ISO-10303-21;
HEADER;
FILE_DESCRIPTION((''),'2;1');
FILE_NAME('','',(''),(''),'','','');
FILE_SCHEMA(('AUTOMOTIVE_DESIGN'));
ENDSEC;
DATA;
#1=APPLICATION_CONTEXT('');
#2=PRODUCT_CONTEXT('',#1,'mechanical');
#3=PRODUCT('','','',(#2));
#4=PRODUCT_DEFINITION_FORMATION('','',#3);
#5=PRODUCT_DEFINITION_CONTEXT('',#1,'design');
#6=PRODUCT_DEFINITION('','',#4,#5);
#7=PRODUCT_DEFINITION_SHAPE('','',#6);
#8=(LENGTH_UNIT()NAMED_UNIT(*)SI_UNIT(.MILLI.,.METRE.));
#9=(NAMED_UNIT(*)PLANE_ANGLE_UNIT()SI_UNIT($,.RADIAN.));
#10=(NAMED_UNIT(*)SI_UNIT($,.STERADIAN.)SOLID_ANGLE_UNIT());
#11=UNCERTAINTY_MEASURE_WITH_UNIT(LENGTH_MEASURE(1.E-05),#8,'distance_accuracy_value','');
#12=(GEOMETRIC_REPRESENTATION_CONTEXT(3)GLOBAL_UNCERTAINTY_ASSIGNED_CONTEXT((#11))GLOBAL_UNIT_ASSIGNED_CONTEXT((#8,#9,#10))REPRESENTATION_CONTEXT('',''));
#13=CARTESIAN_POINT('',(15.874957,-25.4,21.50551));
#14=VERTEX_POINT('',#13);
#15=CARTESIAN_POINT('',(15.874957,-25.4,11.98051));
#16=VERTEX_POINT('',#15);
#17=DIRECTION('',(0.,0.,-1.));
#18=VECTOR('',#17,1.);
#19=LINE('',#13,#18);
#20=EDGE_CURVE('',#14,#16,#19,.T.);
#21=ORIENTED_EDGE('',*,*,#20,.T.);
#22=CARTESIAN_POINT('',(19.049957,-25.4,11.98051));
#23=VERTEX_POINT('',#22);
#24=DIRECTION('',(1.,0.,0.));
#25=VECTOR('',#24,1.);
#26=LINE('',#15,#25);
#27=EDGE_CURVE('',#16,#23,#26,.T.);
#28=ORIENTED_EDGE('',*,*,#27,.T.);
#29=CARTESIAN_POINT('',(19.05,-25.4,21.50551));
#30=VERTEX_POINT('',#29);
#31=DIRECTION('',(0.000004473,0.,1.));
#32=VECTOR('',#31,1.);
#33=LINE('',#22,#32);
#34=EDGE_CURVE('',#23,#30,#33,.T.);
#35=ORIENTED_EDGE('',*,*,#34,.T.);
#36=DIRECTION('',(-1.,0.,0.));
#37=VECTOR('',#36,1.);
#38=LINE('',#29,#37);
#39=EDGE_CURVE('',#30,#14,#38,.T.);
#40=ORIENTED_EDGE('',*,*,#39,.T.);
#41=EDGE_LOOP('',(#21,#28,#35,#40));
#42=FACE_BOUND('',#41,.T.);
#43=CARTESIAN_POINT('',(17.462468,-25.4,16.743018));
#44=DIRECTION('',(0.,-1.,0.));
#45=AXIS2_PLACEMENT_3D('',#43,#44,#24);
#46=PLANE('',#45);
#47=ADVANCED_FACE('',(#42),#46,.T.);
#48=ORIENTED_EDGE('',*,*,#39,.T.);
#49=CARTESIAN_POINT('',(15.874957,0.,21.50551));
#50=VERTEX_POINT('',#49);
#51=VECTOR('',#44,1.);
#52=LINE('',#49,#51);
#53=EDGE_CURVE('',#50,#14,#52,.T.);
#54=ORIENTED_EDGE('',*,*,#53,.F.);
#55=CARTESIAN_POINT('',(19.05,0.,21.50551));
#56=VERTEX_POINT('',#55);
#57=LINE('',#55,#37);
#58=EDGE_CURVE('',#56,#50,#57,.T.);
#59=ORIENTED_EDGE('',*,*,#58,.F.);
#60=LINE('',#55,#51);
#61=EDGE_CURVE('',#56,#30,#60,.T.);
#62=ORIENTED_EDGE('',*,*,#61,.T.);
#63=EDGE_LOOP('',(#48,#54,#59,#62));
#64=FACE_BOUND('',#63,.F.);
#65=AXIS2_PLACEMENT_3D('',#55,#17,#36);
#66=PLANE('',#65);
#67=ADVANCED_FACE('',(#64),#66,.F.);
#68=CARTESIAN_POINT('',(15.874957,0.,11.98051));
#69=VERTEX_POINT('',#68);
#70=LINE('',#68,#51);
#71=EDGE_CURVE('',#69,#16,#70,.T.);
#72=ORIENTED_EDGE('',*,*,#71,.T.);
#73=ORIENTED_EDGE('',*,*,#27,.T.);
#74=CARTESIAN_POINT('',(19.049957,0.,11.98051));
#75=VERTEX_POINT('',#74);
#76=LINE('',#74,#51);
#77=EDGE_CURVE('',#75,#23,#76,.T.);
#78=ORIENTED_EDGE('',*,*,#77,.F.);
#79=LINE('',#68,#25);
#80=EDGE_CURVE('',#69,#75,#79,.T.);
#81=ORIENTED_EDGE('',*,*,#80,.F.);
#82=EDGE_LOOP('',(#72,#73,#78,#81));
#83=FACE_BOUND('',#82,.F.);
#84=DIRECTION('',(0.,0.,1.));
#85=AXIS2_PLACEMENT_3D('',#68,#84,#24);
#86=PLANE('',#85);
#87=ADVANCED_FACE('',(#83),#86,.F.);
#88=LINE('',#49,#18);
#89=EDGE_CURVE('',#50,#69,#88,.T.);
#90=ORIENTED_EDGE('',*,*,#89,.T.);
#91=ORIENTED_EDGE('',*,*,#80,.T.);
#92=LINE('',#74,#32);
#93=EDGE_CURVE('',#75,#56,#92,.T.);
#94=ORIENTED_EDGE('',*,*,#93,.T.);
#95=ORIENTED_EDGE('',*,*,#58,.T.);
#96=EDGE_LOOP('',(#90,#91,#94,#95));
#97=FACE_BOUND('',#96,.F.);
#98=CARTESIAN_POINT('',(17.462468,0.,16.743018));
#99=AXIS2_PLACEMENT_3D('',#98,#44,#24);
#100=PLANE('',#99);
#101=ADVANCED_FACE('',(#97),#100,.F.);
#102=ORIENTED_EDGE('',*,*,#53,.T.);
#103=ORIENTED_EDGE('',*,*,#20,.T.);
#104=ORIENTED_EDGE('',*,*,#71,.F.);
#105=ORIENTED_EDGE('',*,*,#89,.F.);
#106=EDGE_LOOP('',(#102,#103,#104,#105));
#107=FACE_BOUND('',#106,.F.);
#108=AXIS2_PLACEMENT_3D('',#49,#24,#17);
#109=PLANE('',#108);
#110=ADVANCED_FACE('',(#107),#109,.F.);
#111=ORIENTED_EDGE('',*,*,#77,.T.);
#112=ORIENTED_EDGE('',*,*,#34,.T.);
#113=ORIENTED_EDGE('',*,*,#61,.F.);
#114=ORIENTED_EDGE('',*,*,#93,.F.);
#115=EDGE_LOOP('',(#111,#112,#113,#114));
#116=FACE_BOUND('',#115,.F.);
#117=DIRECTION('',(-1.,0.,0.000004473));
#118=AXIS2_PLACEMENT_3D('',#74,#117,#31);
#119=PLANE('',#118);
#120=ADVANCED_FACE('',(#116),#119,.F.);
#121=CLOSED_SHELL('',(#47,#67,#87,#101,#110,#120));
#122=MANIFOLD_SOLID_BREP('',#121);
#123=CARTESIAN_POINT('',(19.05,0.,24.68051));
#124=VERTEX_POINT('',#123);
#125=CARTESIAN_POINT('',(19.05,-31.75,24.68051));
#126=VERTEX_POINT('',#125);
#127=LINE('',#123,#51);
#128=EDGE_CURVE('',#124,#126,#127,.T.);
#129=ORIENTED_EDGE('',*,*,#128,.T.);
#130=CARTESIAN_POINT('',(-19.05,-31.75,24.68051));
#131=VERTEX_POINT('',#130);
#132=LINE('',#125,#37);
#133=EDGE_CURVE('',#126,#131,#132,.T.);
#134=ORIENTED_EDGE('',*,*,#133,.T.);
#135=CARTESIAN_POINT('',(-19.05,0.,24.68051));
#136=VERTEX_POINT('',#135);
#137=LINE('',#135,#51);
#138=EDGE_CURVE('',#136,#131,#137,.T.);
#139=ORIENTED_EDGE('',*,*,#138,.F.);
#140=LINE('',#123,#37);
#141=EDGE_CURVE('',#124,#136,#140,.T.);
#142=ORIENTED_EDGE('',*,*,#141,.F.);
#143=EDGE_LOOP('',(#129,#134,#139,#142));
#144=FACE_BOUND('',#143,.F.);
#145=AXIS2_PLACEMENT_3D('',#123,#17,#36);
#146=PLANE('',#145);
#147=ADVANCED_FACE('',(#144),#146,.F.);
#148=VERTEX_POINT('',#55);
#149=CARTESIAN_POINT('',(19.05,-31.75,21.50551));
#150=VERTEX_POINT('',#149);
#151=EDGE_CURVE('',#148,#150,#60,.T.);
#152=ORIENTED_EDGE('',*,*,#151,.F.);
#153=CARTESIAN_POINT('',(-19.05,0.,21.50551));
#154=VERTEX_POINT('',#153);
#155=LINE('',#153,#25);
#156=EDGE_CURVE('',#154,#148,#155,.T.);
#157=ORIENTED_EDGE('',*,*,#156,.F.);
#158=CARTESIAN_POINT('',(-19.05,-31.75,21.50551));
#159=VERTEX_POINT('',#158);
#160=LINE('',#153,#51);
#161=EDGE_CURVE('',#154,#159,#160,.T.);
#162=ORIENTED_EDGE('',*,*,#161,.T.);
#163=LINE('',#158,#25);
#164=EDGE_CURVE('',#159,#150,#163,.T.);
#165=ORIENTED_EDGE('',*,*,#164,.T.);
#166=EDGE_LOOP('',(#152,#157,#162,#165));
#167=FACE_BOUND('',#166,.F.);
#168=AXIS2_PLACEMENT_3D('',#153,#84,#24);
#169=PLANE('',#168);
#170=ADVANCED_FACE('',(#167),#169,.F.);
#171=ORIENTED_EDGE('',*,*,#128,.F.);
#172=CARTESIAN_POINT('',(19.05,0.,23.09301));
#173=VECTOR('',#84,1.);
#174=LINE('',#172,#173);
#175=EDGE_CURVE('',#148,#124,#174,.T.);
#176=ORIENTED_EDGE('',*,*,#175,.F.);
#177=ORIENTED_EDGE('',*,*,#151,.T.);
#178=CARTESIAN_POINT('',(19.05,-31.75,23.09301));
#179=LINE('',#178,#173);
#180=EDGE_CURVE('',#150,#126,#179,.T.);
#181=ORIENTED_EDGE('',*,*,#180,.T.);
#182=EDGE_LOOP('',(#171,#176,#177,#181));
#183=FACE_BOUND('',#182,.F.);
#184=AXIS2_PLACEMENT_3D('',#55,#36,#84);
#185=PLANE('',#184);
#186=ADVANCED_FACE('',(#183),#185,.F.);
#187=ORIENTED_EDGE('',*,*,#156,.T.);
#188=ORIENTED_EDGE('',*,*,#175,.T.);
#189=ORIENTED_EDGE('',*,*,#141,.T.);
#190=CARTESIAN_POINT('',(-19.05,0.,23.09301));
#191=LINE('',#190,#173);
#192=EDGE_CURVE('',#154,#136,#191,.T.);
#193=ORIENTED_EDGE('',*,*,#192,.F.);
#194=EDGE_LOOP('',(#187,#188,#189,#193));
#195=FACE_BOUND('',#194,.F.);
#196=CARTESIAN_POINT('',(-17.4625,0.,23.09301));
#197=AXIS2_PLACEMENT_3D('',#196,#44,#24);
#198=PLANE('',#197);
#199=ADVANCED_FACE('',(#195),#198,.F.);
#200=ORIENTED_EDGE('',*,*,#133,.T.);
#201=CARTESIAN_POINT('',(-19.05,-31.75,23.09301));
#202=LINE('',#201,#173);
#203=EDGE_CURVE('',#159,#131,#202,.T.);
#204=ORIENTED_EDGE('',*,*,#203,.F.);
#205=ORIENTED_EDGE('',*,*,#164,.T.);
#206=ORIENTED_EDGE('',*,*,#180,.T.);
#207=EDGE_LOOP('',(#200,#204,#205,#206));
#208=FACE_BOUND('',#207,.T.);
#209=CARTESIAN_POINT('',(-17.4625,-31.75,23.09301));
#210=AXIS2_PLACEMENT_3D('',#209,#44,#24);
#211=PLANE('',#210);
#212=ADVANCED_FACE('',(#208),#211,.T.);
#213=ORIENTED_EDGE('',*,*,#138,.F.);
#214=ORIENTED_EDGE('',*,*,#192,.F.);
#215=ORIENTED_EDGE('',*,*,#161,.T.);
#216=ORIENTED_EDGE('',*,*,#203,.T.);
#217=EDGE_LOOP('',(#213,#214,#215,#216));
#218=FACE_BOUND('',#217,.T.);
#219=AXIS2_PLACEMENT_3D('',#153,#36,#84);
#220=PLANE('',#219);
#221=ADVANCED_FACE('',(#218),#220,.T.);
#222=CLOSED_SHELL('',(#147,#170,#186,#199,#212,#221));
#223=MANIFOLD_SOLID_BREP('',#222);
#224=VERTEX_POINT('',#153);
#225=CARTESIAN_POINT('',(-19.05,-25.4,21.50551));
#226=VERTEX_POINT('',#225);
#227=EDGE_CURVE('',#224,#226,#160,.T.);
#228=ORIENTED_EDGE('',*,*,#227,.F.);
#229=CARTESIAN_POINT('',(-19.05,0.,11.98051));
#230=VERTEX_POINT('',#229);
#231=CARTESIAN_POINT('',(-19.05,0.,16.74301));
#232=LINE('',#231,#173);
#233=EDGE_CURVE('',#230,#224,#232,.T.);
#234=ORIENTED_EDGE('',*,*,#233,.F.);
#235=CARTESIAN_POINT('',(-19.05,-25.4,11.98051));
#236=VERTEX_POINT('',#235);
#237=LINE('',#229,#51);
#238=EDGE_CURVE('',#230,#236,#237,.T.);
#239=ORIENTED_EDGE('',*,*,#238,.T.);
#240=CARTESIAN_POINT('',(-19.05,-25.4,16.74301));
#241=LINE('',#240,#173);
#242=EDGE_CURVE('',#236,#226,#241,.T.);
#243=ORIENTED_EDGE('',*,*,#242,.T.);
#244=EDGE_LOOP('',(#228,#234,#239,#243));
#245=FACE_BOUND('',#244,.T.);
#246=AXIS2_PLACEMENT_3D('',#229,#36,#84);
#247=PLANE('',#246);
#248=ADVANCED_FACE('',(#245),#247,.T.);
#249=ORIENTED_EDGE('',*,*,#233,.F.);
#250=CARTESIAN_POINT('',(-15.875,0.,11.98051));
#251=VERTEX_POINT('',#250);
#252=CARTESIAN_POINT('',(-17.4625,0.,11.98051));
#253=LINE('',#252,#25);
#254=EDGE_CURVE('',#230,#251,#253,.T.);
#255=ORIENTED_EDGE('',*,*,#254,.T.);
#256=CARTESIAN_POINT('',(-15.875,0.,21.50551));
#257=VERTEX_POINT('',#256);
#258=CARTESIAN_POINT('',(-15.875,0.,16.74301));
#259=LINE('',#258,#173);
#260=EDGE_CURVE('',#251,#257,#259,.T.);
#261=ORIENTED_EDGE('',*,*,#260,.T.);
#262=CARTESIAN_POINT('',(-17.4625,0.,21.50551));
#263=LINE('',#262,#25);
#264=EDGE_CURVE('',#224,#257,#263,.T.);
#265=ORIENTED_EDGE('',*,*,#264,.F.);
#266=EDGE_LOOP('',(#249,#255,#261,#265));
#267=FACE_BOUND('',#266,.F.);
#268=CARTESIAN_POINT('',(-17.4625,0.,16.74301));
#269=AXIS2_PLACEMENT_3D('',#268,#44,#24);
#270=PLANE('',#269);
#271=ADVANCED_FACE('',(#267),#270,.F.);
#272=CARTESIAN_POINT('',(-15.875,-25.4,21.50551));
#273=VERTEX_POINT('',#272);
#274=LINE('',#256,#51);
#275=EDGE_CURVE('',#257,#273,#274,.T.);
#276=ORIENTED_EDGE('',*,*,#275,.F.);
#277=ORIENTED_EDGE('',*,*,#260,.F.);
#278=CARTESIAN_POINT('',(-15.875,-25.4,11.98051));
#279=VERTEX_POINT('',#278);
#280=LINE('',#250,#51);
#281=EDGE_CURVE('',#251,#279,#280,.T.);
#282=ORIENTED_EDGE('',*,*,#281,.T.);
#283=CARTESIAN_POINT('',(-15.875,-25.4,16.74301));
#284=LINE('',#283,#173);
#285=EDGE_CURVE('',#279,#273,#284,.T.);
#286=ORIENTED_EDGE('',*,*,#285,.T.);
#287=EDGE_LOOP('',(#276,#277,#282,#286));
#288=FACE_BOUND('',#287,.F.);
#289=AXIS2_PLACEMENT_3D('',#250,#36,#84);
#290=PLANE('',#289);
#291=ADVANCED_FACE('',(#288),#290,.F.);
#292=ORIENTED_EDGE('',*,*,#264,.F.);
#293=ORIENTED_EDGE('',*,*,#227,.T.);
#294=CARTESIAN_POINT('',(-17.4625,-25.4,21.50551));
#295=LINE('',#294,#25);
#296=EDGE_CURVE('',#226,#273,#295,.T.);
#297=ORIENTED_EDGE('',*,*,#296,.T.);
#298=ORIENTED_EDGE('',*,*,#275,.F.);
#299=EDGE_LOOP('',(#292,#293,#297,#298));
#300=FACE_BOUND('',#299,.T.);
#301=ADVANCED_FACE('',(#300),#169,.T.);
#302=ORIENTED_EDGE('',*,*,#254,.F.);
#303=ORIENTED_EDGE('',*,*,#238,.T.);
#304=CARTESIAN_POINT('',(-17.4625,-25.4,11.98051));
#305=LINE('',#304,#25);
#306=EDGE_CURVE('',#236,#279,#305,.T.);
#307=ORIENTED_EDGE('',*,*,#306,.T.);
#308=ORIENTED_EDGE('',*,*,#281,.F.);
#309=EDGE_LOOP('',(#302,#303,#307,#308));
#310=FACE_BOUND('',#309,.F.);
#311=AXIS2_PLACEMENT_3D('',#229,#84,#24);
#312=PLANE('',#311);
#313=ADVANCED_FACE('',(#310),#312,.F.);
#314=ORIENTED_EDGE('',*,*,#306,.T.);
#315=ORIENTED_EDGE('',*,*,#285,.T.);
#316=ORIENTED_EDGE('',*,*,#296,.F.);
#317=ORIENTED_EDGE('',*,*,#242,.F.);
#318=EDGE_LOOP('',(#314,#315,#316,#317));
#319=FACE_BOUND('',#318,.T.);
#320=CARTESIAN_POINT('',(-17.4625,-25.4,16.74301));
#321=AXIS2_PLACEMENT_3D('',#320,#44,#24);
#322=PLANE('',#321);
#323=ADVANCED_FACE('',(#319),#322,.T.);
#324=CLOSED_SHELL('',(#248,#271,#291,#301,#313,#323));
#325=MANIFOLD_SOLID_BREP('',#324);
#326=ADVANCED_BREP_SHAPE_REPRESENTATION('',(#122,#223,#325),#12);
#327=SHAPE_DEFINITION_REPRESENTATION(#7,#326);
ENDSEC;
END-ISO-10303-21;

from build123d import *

# Parameters (mm, degrees)
F0_W     = 3.175
F0_H     = 3.175
F0_W_2   = 31.7499573946
F0_W_3   = 3.1750426054
F1_DEPTH = 31.75
F0_H_2   = 9.525
F2_DEPTH = 25.4


# Not quite as in the source:
# - ends of sketch curves that miss each other by under 0.0002 mm in the source are joined


with BuildPart() as f1:
    # F0 (on Front) → F1 (new body)
    with BuildSketch(Plane.XZ):
        with Locations((-17.4625, 23.0930101633)):
            Rectangle(F0_W, F0_H)
        with Locations((-2.13027e-05, 23.0930101633)):
            Rectangle(F0_W_2, F0_H)
        with Locations((17.4624786973, 23.0930101633)):
            Rectangle(F0_W_3, F0_H)
    extrude(amount=F1_DEPTH)


with BuildPart() as f2:
    # F0 (on Front) → F2 (new body)
    with BuildSketch(Plane.XZ):
        with Locations((-17.4625, 16.7430101633)):
            Rectangle(F0_W, F0_H_2)
    extrude(amount=F2_DEPTH)


with BuildPart() as f2b:
    # F0 (on Front) → F2, piece 2 (new body)
    with BuildSketch(Plane.XZ):
        Polygon((19.05, 21.5055101633), (15.8749573946, 21.5055101633), (15.8749573946, 11.9805101633), (19.0499573946, 11.9805101633), align=None)
    extrude(amount=F2_DEPTH)


solid = Compound([f1.part, f2.part, f2b.part])
